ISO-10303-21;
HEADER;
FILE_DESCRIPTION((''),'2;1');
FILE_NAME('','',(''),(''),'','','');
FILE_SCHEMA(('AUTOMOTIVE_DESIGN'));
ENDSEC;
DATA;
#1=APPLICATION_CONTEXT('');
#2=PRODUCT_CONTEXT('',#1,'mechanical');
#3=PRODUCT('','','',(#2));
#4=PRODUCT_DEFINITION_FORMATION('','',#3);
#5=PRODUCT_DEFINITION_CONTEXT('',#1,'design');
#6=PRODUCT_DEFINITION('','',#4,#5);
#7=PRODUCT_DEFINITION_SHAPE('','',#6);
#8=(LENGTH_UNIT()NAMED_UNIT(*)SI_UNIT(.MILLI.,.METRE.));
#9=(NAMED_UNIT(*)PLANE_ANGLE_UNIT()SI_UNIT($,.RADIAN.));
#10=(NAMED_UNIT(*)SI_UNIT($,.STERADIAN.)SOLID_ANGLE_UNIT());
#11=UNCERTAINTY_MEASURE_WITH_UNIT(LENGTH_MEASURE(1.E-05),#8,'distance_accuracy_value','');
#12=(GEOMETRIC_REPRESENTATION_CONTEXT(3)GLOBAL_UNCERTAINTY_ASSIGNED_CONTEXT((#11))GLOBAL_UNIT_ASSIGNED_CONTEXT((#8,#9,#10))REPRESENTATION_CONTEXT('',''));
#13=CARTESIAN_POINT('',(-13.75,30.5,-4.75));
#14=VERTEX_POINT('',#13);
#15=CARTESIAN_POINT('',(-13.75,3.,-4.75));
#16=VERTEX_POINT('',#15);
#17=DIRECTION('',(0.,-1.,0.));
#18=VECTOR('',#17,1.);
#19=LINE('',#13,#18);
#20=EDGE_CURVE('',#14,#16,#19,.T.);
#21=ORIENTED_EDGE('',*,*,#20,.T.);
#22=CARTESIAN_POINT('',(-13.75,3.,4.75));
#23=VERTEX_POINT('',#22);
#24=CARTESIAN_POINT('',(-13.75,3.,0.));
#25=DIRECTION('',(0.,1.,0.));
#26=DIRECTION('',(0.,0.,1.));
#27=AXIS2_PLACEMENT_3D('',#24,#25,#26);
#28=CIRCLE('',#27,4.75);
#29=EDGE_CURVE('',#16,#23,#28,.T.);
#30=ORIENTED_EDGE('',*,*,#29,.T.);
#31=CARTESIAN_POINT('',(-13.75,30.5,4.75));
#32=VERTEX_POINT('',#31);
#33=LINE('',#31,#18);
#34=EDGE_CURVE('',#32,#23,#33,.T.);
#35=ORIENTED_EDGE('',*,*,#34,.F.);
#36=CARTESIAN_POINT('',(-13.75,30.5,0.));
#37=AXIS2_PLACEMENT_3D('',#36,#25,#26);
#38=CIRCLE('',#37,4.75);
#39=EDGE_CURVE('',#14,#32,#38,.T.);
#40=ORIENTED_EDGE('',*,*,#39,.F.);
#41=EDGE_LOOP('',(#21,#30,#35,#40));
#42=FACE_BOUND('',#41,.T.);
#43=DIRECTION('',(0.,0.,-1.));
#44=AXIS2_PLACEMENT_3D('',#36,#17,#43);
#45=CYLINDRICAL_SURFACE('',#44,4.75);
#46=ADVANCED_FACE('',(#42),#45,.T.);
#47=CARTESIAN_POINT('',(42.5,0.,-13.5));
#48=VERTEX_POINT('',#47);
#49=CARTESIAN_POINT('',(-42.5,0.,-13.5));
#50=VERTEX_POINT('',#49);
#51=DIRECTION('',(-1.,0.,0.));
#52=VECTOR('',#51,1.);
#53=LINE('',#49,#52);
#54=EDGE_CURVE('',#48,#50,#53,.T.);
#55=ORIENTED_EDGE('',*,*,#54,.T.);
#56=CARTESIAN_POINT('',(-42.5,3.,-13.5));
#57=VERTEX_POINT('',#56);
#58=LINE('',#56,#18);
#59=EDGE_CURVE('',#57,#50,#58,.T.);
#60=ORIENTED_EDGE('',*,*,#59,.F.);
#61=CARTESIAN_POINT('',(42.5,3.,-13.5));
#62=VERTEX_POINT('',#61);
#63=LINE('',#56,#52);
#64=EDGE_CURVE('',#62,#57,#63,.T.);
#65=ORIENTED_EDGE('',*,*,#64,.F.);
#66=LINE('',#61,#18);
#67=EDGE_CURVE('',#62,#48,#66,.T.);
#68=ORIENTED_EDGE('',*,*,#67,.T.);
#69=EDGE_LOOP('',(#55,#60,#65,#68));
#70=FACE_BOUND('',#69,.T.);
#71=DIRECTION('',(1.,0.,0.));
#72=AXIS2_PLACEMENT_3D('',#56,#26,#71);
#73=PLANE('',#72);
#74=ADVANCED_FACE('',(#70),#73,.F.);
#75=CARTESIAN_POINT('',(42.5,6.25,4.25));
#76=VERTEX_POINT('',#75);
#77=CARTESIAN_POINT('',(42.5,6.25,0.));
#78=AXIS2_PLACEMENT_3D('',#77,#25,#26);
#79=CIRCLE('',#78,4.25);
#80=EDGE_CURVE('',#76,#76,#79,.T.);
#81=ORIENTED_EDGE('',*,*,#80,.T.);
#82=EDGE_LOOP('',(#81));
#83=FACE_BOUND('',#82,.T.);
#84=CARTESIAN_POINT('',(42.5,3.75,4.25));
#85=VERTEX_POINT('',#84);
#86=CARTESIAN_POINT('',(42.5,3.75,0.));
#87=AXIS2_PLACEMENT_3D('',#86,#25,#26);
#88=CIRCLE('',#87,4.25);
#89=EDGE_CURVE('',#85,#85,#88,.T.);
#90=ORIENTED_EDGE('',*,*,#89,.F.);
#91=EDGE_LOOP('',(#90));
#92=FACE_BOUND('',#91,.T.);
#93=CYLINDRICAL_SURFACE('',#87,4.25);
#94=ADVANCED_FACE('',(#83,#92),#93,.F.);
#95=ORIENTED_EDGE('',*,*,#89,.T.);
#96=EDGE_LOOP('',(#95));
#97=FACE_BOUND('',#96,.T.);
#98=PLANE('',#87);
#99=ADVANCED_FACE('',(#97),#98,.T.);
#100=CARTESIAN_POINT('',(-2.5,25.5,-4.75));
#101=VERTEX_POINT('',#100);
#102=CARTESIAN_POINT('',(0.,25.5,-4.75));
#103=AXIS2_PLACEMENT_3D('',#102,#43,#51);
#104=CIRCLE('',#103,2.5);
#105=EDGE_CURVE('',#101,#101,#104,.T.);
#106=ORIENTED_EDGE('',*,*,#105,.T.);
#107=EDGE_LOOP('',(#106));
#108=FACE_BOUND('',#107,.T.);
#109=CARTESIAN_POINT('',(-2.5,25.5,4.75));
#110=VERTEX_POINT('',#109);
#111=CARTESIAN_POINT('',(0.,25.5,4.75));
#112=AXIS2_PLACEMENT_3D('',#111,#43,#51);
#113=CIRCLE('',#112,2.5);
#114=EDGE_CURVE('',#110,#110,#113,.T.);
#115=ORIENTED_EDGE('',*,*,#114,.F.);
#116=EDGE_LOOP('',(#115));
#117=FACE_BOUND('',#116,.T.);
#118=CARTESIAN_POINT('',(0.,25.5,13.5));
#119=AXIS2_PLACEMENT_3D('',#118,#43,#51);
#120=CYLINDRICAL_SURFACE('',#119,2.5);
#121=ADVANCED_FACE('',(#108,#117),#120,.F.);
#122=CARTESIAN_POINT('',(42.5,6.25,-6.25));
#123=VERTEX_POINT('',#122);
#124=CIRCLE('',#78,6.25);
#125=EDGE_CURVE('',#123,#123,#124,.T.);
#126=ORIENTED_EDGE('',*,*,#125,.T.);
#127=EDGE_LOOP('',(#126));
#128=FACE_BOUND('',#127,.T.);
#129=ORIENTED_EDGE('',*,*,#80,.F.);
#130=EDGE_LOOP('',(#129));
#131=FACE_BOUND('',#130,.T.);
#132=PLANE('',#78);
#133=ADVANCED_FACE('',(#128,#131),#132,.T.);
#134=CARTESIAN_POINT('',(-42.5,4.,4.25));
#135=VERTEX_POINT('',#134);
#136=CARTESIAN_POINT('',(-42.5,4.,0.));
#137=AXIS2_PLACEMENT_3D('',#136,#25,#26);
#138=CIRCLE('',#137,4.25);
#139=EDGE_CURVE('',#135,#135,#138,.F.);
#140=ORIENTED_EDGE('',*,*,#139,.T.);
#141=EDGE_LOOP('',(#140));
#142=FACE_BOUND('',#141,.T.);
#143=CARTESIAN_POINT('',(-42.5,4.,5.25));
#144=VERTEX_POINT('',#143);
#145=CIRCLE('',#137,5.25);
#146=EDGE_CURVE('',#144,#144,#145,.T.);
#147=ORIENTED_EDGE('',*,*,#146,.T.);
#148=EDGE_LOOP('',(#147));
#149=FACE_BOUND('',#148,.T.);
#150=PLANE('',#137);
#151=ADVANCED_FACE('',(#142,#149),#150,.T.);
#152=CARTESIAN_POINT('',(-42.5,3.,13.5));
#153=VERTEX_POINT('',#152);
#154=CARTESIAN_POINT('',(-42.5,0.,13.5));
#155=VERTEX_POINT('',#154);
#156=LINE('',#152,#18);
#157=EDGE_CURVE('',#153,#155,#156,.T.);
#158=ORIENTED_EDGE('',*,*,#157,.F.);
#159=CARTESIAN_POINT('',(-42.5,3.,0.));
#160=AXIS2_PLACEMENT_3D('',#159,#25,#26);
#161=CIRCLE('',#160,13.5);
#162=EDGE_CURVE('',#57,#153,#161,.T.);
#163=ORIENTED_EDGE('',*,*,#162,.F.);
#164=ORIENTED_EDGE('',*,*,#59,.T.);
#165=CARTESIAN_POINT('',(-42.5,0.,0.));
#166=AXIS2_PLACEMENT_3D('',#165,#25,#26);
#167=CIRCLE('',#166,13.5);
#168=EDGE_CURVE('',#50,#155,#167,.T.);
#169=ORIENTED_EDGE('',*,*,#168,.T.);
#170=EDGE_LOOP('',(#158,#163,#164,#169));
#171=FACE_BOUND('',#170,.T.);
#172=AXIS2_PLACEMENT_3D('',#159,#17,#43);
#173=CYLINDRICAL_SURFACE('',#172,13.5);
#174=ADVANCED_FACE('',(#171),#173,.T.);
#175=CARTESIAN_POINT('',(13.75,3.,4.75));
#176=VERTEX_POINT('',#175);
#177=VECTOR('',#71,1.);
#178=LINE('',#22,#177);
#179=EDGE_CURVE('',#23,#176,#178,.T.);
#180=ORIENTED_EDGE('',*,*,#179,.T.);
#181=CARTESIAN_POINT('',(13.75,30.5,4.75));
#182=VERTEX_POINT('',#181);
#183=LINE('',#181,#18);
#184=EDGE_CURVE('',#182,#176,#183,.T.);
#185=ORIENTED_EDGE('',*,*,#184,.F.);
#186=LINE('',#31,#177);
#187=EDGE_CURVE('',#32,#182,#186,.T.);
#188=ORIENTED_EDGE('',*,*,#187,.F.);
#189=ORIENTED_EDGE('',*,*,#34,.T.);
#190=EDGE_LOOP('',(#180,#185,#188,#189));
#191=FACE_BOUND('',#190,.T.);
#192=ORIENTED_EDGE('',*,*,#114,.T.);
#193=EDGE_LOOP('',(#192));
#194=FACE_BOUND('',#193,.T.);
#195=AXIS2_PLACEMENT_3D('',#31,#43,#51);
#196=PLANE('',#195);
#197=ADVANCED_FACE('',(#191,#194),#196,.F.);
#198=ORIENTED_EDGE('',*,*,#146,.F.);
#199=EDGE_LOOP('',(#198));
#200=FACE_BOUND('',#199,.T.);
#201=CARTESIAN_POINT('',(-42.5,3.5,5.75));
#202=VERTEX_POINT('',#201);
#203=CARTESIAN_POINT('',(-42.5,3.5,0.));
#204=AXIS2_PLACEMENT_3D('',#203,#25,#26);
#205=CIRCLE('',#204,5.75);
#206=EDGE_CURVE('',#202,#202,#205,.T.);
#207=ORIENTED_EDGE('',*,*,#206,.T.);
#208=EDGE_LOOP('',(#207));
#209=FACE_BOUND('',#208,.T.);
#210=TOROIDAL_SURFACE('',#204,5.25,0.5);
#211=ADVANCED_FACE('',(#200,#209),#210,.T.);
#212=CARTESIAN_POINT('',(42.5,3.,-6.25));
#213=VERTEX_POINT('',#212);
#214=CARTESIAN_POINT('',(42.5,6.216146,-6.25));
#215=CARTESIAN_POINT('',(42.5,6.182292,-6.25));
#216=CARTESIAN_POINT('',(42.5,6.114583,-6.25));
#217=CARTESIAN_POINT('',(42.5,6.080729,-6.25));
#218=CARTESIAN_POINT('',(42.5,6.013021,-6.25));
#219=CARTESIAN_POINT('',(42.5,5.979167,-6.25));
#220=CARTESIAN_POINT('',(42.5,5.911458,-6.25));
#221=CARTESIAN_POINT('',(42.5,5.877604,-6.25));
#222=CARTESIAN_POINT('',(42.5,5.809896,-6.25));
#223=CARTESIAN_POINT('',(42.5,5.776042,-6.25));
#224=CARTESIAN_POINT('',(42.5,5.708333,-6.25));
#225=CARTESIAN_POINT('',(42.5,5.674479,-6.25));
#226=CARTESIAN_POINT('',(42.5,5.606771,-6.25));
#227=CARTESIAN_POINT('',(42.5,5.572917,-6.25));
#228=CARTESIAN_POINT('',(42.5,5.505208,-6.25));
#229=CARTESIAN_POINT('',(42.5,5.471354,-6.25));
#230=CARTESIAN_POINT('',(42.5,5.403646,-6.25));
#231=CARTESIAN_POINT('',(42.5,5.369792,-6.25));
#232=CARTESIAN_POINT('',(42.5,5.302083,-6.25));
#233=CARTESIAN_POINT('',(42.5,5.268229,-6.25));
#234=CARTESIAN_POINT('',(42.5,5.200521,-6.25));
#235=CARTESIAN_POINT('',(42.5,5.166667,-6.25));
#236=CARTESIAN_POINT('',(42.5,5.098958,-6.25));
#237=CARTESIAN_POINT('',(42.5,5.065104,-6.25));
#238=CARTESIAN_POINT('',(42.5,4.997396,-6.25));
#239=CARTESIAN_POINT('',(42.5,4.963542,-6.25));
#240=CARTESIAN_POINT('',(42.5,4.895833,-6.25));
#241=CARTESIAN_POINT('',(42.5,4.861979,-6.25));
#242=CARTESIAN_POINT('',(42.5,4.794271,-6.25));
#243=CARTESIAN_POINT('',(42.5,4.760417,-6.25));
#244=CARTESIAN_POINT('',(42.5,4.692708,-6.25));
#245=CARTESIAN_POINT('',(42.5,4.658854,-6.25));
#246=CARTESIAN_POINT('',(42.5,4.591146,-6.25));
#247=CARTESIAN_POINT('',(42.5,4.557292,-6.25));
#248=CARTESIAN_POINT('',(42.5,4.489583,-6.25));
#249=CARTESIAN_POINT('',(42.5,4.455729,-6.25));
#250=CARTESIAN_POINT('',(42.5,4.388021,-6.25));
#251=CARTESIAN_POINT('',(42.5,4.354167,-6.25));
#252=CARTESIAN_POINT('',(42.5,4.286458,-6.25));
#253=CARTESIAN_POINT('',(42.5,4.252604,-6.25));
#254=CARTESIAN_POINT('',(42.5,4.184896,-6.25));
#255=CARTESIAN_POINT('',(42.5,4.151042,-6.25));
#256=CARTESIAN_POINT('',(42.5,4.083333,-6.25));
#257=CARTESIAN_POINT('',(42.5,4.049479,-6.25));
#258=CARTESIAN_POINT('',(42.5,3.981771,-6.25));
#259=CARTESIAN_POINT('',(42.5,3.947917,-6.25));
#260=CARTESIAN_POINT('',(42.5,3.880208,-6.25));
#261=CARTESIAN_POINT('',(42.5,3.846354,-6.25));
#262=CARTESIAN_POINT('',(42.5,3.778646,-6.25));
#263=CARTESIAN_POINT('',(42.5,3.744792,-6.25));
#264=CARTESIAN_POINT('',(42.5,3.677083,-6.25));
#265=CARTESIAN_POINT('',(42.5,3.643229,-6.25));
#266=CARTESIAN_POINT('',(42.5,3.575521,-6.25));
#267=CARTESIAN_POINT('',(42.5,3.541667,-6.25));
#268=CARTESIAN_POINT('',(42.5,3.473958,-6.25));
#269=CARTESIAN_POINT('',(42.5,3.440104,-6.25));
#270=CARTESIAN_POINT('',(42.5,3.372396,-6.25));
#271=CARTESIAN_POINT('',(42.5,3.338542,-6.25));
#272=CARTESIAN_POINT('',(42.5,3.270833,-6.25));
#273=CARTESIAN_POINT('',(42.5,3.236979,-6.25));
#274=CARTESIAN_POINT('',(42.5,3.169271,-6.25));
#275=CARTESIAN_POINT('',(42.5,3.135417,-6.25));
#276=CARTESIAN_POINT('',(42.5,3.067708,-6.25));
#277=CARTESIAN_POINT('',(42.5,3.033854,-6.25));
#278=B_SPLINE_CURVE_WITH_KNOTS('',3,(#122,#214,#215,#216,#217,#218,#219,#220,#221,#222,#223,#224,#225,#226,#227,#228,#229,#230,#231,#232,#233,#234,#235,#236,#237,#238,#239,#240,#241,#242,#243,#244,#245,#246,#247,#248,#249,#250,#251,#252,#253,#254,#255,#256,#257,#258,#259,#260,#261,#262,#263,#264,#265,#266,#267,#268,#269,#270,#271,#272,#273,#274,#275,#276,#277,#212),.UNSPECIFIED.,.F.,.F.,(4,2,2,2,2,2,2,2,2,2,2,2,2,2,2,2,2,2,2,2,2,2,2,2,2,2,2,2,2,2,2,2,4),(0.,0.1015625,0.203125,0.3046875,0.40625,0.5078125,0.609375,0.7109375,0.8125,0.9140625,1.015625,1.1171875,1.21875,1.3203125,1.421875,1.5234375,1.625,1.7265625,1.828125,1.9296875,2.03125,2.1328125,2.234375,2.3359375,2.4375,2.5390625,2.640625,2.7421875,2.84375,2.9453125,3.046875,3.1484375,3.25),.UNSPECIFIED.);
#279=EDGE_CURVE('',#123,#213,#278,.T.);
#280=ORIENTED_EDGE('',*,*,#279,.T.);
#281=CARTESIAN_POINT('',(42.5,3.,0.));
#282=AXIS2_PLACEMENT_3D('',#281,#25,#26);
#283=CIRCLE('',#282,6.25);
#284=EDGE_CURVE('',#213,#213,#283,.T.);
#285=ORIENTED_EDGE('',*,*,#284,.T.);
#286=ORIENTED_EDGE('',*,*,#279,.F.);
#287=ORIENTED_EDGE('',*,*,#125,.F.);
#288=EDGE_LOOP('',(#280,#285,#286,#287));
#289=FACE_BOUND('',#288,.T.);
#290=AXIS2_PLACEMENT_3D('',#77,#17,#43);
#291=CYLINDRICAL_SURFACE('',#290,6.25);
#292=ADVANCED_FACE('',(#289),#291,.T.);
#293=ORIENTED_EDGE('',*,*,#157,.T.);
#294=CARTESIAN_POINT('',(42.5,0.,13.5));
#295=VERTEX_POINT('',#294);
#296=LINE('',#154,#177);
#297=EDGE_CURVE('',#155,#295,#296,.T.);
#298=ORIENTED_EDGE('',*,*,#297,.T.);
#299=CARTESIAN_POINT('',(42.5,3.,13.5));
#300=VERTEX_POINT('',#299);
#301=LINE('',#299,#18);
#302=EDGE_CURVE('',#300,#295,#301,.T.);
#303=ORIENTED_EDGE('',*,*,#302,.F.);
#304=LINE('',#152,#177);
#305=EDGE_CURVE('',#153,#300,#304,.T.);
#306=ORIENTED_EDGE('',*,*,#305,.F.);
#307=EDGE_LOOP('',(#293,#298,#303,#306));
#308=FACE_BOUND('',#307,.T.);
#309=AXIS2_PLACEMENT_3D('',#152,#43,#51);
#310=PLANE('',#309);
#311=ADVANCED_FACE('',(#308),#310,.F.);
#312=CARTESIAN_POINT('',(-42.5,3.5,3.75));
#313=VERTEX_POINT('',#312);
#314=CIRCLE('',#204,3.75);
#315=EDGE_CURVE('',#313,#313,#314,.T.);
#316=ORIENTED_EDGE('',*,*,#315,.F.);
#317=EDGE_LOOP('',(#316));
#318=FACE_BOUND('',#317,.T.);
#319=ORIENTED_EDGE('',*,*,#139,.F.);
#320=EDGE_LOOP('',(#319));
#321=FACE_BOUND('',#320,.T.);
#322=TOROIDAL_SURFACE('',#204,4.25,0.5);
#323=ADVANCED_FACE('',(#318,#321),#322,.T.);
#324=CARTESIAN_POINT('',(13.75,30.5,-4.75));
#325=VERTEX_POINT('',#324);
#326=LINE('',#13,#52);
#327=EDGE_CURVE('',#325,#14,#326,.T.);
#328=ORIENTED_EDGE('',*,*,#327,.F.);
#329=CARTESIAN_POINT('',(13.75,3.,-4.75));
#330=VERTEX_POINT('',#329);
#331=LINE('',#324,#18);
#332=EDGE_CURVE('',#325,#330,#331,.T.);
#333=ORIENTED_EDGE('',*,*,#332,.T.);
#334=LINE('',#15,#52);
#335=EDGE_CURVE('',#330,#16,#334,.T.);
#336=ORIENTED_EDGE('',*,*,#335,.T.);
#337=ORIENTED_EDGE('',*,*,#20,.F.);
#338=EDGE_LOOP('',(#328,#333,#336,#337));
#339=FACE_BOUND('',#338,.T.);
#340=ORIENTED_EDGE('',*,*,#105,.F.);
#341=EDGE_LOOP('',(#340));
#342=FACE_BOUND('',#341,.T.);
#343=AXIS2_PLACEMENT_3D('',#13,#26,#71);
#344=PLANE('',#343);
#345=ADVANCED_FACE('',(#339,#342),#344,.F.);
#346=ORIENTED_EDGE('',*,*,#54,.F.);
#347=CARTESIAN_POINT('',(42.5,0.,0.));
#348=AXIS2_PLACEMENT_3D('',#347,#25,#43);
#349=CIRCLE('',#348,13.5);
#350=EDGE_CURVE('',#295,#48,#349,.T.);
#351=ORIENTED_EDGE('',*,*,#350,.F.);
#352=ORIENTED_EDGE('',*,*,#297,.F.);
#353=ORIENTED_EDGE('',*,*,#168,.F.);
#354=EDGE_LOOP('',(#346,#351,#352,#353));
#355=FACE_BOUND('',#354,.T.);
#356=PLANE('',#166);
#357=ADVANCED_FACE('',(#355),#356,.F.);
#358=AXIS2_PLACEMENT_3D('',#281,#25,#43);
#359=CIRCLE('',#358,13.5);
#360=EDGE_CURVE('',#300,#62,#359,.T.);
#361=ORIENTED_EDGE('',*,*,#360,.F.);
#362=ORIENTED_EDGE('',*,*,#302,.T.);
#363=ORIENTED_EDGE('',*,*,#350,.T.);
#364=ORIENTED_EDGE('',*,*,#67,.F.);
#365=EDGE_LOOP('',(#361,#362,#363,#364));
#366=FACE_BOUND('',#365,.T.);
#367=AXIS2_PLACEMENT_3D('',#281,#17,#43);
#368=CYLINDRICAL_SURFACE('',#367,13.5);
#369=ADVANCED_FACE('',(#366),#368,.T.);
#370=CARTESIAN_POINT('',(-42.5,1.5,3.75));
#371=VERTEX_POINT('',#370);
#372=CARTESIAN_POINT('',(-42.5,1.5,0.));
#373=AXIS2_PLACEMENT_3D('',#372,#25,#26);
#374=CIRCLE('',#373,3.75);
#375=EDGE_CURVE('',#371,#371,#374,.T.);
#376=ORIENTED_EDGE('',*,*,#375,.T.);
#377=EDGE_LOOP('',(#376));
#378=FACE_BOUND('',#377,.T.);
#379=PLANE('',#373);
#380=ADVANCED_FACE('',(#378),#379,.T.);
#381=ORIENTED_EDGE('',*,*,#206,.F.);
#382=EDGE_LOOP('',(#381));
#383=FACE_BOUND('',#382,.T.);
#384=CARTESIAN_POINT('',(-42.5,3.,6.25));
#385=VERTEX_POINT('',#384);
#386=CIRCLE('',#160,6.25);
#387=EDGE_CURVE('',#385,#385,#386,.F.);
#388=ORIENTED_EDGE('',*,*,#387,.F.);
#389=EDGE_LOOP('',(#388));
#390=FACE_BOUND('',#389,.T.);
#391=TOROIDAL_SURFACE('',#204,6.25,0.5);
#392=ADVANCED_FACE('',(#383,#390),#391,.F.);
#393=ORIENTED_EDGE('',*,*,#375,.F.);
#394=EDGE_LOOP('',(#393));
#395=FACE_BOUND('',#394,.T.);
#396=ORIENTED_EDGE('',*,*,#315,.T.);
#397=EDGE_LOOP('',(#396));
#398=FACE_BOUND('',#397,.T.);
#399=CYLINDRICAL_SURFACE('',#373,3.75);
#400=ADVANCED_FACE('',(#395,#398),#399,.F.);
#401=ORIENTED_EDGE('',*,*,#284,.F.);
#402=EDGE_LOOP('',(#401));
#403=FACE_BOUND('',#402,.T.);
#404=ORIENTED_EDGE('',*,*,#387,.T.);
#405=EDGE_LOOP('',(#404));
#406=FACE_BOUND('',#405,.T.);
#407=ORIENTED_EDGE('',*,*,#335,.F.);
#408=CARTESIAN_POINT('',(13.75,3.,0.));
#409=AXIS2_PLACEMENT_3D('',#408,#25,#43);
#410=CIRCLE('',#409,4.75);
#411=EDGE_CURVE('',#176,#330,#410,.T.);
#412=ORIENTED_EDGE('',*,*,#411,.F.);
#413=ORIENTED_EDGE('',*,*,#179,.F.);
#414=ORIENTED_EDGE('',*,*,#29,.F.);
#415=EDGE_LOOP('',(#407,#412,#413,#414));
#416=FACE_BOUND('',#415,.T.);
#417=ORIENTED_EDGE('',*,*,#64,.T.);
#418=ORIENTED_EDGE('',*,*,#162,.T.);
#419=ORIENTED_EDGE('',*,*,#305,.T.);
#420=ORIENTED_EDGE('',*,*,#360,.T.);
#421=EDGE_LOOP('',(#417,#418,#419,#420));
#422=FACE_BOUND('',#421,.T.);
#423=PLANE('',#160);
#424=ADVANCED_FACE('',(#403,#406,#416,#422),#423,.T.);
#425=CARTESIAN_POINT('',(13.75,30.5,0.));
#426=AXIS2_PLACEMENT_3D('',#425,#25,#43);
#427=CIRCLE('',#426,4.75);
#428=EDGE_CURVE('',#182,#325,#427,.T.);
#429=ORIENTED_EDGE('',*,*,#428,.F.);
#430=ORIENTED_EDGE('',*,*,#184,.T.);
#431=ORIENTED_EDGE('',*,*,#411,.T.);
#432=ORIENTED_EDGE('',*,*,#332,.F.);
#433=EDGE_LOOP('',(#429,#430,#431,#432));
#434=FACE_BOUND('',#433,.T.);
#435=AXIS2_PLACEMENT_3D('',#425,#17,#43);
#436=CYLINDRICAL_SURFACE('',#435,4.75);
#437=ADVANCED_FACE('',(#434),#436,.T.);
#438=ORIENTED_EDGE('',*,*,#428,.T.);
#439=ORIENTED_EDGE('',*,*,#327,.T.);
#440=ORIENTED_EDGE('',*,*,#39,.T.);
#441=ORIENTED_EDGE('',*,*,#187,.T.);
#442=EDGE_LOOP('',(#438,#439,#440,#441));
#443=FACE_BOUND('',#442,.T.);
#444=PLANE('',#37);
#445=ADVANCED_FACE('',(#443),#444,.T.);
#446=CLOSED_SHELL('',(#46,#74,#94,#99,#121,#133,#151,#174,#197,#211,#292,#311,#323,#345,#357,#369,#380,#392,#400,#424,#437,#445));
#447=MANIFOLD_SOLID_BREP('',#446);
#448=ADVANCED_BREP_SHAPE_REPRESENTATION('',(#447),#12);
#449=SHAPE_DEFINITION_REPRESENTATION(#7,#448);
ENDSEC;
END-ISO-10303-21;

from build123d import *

# Parameters (mm, degrees)
BOSS_EXTRUDE1_DEPTH = 3
SKETCH7_R           = 5.75
BOSS_EXTRUDE5_DEPTH = 1
SKETCH2_R           = 3.75
CUT_EXTRUDE1_DEPTH  = 2.5
SKETCH3_R           = 6.25
BOSS_EXTRUDE3_DEPTH = 3.25
SKETCH4_R           = 4.25
CUT_EXTRUDE2_DEPTH  = 2.5
BOSS_EXTRUDE4_DEPTH = 27.5
SKETCH6_R           = 2.5
CUT_EXTRUDE3_DEPTH  = 67.327313378
FILLET1_R           = 0.5


with BuildPart() as part:
    # Sketch1 → Boss-Extrude1 (new body)
    with BuildSketch(Plane(origin=(0, 0, 0), x_dir=(1, 0, 0), z_dir=(0, 1, 0))):
        with BuildLine():
            Line((-42.5, -13.5), (42.5, -13.5))
            ThreePointArc((42.5, -13.5), (56, 0), (42.5, 13.5))
            Line((42.5, 13.5), (-42.5, 13.5))
            ThreePointArc((-42.5, 13.5), (-56, 0), (-42.5, -13.5))
        make_face()
    extrude(amount=BOSS_EXTRUDE1_DEPTH)

    # Sketch7 → Boss-Extrude5 (add)
    with BuildSketch(Plane(origin=(0, 3, 0), x_dir=(1, 0, 0), z_dir=(0, 1, 0))):
        with Locations(Location((-42.5, 0, 0), (0, 0, 270))):
            Circle(SKETCH7_R)
    extrude(amount=BOSS_EXTRUDE5_DEPTH)

    # Sketch2 → Cut-Extrude1 (cut)
    with BuildSketch(Plane(origin=(0, 4, 0), x_dir=(1, 0, 0), z_dir=(0, 1, 0))):
        with Locations(Location((-42.5, 0, 0), (0, 0, 270))):
            Circle(SKETCH2_R)
    extrude(amount=-CUT_EXTRUDE1_DEPTH, mode=Mode.SUBTRACT)

    # Sketch3 → Boss-Extrude3 (add)
    with BuildSketch(Plane(origin=(0, 3, 0), x_dir=(1, 0, 0), z_dir=(0, 1, 0))):
        with Locations(Location((42.5, 0, 0), (0, 0, 90))):
            Circle(SKETCH3_R)
    extrude(amount=BOSS_EXTRUDE3_DEPTH)

    # Sketch4 → Cut-Extrude2 (cut)
    with BuildSketch(Plane(origin=(0, 6.25, 0), x_dir=(1, 0, 0), z_dir=(0, 1, 0))):
        with Locations(Location((42.5, 0, 0), (0, 0, 270))):
            Circle(SKETCH4_R)
    extrude(amount=-CUT_EXTRUDE2_DEPTH, mode=Mode.SUBTRACT)

    # Sketch5 → Boss-Extrude4 (add)
    with BuildSketch(Plane(origin=(0, 3, 0), x_dir=(1, 0, 0), z_dir=(0, 1, 0))):
        with BuildLine():
            Line((-13.75, 4.75), (13.75, 4.75))
            ThreePointArc((13.75, 4.75), (18.5, 0), (13.75, -4.75))
            Line((13.75, -4.75), (-13.75, -4.75))
            ThreePointArc((-13.75, -4.75), (-18.5, 0), (-13.75, 4.75))
        make_face()
    extrude(amount=BOSS_EXTRUDE4_DEPTH)

    # Sketch6 → Cut-Extrude3 (cut, through all)
    with BuildSketch(Plane(origin=(0, 0, -4.75), x_dir=(-1, 0, 0), z_dir=(0, 0, -1))):
        with Locations((0, 25.5)):
            Circle(SKETCH6_R)
    extrude(amount=-CUT_EXTRUDE3_DEPTH, mode=Mode.SUBTRACT)

    # Fillet1
    fillet1_edges = [part.edges().sort_by_distance(p)[0] for p in [
        (-42.5, 3, -5.75),
        (-42.5, 4, -5.75),
        (-42.5, 4, -3.75),
    ]]
    fillet(fillet1_edges, radius=FILLET1_R - 0.0001)  # a hair under: the kernel refuses the full size


solid = part.part
